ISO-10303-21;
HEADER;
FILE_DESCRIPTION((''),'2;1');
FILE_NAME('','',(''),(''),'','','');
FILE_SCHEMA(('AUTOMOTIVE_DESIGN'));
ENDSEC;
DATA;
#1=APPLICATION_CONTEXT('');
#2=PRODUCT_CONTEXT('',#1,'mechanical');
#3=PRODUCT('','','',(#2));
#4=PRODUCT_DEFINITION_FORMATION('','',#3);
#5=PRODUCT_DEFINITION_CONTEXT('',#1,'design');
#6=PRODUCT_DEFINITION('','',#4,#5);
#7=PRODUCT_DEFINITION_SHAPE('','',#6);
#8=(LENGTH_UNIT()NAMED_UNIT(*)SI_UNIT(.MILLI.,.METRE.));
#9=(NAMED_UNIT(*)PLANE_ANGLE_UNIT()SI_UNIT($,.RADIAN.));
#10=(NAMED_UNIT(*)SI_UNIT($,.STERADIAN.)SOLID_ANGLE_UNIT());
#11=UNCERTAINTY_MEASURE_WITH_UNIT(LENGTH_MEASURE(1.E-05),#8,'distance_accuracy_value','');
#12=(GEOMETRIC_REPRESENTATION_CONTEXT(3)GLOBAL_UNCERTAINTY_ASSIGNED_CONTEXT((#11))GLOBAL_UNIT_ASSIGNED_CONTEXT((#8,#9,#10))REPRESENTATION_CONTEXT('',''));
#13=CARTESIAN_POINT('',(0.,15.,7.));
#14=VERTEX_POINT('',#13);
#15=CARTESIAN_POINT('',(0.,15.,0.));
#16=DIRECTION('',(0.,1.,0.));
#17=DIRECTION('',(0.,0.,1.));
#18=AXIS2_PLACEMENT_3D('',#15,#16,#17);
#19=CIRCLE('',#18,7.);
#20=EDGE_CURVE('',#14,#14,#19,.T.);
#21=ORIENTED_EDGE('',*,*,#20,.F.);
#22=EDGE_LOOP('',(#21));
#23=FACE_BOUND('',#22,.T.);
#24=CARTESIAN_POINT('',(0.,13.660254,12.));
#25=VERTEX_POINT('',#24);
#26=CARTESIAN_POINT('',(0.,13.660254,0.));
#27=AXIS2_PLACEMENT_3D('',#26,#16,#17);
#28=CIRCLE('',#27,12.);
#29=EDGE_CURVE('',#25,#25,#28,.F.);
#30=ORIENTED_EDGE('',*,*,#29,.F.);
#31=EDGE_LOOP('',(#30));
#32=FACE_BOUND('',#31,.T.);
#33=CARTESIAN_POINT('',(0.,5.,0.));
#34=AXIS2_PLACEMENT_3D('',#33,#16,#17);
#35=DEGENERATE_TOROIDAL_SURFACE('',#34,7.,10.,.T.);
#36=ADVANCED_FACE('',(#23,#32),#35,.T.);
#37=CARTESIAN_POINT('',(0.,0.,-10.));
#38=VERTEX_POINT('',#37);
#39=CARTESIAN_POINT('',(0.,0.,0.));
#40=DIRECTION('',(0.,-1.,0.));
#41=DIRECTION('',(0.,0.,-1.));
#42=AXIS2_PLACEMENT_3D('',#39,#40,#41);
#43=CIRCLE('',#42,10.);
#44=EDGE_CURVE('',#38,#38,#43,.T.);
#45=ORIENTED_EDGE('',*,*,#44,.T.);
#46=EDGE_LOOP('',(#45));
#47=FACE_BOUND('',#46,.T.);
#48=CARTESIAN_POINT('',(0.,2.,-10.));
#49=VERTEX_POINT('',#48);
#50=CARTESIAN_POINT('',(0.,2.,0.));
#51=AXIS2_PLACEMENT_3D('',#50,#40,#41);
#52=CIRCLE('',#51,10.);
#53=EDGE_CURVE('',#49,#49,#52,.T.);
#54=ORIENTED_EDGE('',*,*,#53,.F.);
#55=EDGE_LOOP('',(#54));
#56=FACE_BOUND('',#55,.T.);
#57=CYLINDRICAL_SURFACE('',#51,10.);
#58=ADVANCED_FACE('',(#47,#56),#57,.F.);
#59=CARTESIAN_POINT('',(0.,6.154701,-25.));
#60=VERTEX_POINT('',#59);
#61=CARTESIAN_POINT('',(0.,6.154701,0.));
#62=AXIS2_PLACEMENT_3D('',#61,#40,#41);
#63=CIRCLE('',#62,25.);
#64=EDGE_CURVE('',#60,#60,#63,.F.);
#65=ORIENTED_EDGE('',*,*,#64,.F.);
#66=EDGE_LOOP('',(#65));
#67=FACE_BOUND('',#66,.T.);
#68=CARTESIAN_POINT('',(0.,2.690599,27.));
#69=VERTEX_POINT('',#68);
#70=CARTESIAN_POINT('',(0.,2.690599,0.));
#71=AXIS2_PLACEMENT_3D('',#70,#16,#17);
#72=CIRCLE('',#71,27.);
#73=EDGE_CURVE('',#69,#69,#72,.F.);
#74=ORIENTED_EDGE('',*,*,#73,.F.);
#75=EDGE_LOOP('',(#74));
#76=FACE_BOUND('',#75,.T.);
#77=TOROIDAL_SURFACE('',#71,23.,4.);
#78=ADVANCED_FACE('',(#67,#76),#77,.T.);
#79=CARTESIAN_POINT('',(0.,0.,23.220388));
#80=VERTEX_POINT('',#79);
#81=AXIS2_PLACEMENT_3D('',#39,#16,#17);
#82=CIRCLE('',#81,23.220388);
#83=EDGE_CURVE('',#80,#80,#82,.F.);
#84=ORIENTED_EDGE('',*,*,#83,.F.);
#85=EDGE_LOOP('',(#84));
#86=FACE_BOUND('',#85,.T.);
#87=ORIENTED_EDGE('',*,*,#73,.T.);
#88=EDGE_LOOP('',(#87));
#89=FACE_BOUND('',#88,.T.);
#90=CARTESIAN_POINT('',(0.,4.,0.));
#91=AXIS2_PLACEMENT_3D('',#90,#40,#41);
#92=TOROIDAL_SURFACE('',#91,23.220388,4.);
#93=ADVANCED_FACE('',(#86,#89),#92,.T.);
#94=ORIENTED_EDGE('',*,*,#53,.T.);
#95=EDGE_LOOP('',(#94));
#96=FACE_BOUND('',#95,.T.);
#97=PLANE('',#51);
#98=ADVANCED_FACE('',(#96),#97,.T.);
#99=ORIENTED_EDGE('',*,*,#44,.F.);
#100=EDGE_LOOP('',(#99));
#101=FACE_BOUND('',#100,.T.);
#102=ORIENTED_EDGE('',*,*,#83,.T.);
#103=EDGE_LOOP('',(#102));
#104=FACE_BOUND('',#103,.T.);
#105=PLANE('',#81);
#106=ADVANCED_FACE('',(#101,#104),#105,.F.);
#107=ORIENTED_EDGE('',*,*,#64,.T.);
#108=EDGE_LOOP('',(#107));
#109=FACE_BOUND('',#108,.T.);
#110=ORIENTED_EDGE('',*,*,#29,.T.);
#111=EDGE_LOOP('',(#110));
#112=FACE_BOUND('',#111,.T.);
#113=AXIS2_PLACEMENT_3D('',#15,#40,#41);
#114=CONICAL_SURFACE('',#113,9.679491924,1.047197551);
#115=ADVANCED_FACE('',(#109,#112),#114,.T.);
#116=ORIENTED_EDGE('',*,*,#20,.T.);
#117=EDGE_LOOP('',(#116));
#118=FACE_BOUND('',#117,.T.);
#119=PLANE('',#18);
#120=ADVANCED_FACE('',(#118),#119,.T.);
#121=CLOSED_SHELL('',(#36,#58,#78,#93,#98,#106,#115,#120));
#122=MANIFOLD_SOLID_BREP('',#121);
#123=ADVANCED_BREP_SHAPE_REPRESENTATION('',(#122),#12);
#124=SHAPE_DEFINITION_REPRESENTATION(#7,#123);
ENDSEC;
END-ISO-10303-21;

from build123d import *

# Parameters (mm, degrees)
IZIM1_R                     = 27
Y_KSEKLIK_EKSTR_ZYON1_DEPTH = 15
PAH1_SIZE                   = 10
PAH1_SIZE2                  = 17.320508076
RADYUS1_R                   = 10
RADYUS2_R                   = 4
RADYUS3_R                   = 4
IZIM2_R                     = 10
KES_EKSTR_ZYON1_DEPTH       = 2


with BuildPart() as part:
    # Çizim1 → Yükseklik-Ekstrüzyon1 (new body)
    with BuildSketch(Plane(origin=(0, 0, 0), x_dir=(1, 0, 0), z_dir=(0, 1, 0))):
        with Locations(Location((0, 0, 0), (0, 0, 270))):
            Circle(IZIM1_R)
    extrude(amount=Y_KSEKLIK_EKSTR_ZYON1_DEPTH)

    # Pah1
    pah1_edges = [part.edges().sort_by_distance(p)[0] for p in [
        (0, 15, -27),
    ]]
    pah1_side = [part.faces().sort_by_distance(p)[0] for p in [
        (0, 7.5, -27),
    ]]
    chamfer(pah1_edges, length=PAH1_SIZE, length2=PAH1_SIZE2, reference=pah1_side[0])

    # Radyus1
    radyus1_edges = [part.edges().sort_by_distance(p)[0] for p in [
        (0, 15, -9.679491924),
    ]]
    fillet(radyus1_edges, radius=RADYUS1_R)

    # Radyus2
    radyus2_edges = [part.edges().sort_by_distance(p)[0] for p in [
        (0, 5, -27),
    ]]
    fillet(radyus2_edges, radius=RADYUS2_R)

    # Radyus3
    # the kernel refuses this fillet: 4 mm, written as the material it takes off along each edge
    with BuildSketch(Plane(origin=(0, 0, 0), x_dir=(0, 0, 1), z_dir=(-1, 0, 0))) as radyus3_piece_1:
        with BuildLine():
            CenterArc((23.220386989, 4), RADYUS3_R, 270, 70.891973705)
            Line((23.220386989, 0), (23.220386989, -0.08))
            Line((23.220386989, -0.08), (27, -0.08))
            Line((27, -0.08), (27.08, 0))
            ThreePointArc((27.08, 0), (27.08, 1.345299462), (27.075591492, 2.664410902))
            Line((27.075591492, 2.664410902), (26.999999247, 2.690598923))
        make_face()
    revolve(axis=Axis((0, 0, 0), (0, 1, 0)), mode=Mode.SUBTRACT)

    # Çizim2 → Kes-Ekstrüzyon1 (cut)
    with BuildSketch(Plane.XZ):
        with Locations(Location((0, 0, 0), (0, 0, 270))):
            Circle(IZIM2_R)
    extrude(amount=-KES_EKSTR_ZYON1_DEPTH, mode=Mode.SUBTRACT)


solid = part.part
